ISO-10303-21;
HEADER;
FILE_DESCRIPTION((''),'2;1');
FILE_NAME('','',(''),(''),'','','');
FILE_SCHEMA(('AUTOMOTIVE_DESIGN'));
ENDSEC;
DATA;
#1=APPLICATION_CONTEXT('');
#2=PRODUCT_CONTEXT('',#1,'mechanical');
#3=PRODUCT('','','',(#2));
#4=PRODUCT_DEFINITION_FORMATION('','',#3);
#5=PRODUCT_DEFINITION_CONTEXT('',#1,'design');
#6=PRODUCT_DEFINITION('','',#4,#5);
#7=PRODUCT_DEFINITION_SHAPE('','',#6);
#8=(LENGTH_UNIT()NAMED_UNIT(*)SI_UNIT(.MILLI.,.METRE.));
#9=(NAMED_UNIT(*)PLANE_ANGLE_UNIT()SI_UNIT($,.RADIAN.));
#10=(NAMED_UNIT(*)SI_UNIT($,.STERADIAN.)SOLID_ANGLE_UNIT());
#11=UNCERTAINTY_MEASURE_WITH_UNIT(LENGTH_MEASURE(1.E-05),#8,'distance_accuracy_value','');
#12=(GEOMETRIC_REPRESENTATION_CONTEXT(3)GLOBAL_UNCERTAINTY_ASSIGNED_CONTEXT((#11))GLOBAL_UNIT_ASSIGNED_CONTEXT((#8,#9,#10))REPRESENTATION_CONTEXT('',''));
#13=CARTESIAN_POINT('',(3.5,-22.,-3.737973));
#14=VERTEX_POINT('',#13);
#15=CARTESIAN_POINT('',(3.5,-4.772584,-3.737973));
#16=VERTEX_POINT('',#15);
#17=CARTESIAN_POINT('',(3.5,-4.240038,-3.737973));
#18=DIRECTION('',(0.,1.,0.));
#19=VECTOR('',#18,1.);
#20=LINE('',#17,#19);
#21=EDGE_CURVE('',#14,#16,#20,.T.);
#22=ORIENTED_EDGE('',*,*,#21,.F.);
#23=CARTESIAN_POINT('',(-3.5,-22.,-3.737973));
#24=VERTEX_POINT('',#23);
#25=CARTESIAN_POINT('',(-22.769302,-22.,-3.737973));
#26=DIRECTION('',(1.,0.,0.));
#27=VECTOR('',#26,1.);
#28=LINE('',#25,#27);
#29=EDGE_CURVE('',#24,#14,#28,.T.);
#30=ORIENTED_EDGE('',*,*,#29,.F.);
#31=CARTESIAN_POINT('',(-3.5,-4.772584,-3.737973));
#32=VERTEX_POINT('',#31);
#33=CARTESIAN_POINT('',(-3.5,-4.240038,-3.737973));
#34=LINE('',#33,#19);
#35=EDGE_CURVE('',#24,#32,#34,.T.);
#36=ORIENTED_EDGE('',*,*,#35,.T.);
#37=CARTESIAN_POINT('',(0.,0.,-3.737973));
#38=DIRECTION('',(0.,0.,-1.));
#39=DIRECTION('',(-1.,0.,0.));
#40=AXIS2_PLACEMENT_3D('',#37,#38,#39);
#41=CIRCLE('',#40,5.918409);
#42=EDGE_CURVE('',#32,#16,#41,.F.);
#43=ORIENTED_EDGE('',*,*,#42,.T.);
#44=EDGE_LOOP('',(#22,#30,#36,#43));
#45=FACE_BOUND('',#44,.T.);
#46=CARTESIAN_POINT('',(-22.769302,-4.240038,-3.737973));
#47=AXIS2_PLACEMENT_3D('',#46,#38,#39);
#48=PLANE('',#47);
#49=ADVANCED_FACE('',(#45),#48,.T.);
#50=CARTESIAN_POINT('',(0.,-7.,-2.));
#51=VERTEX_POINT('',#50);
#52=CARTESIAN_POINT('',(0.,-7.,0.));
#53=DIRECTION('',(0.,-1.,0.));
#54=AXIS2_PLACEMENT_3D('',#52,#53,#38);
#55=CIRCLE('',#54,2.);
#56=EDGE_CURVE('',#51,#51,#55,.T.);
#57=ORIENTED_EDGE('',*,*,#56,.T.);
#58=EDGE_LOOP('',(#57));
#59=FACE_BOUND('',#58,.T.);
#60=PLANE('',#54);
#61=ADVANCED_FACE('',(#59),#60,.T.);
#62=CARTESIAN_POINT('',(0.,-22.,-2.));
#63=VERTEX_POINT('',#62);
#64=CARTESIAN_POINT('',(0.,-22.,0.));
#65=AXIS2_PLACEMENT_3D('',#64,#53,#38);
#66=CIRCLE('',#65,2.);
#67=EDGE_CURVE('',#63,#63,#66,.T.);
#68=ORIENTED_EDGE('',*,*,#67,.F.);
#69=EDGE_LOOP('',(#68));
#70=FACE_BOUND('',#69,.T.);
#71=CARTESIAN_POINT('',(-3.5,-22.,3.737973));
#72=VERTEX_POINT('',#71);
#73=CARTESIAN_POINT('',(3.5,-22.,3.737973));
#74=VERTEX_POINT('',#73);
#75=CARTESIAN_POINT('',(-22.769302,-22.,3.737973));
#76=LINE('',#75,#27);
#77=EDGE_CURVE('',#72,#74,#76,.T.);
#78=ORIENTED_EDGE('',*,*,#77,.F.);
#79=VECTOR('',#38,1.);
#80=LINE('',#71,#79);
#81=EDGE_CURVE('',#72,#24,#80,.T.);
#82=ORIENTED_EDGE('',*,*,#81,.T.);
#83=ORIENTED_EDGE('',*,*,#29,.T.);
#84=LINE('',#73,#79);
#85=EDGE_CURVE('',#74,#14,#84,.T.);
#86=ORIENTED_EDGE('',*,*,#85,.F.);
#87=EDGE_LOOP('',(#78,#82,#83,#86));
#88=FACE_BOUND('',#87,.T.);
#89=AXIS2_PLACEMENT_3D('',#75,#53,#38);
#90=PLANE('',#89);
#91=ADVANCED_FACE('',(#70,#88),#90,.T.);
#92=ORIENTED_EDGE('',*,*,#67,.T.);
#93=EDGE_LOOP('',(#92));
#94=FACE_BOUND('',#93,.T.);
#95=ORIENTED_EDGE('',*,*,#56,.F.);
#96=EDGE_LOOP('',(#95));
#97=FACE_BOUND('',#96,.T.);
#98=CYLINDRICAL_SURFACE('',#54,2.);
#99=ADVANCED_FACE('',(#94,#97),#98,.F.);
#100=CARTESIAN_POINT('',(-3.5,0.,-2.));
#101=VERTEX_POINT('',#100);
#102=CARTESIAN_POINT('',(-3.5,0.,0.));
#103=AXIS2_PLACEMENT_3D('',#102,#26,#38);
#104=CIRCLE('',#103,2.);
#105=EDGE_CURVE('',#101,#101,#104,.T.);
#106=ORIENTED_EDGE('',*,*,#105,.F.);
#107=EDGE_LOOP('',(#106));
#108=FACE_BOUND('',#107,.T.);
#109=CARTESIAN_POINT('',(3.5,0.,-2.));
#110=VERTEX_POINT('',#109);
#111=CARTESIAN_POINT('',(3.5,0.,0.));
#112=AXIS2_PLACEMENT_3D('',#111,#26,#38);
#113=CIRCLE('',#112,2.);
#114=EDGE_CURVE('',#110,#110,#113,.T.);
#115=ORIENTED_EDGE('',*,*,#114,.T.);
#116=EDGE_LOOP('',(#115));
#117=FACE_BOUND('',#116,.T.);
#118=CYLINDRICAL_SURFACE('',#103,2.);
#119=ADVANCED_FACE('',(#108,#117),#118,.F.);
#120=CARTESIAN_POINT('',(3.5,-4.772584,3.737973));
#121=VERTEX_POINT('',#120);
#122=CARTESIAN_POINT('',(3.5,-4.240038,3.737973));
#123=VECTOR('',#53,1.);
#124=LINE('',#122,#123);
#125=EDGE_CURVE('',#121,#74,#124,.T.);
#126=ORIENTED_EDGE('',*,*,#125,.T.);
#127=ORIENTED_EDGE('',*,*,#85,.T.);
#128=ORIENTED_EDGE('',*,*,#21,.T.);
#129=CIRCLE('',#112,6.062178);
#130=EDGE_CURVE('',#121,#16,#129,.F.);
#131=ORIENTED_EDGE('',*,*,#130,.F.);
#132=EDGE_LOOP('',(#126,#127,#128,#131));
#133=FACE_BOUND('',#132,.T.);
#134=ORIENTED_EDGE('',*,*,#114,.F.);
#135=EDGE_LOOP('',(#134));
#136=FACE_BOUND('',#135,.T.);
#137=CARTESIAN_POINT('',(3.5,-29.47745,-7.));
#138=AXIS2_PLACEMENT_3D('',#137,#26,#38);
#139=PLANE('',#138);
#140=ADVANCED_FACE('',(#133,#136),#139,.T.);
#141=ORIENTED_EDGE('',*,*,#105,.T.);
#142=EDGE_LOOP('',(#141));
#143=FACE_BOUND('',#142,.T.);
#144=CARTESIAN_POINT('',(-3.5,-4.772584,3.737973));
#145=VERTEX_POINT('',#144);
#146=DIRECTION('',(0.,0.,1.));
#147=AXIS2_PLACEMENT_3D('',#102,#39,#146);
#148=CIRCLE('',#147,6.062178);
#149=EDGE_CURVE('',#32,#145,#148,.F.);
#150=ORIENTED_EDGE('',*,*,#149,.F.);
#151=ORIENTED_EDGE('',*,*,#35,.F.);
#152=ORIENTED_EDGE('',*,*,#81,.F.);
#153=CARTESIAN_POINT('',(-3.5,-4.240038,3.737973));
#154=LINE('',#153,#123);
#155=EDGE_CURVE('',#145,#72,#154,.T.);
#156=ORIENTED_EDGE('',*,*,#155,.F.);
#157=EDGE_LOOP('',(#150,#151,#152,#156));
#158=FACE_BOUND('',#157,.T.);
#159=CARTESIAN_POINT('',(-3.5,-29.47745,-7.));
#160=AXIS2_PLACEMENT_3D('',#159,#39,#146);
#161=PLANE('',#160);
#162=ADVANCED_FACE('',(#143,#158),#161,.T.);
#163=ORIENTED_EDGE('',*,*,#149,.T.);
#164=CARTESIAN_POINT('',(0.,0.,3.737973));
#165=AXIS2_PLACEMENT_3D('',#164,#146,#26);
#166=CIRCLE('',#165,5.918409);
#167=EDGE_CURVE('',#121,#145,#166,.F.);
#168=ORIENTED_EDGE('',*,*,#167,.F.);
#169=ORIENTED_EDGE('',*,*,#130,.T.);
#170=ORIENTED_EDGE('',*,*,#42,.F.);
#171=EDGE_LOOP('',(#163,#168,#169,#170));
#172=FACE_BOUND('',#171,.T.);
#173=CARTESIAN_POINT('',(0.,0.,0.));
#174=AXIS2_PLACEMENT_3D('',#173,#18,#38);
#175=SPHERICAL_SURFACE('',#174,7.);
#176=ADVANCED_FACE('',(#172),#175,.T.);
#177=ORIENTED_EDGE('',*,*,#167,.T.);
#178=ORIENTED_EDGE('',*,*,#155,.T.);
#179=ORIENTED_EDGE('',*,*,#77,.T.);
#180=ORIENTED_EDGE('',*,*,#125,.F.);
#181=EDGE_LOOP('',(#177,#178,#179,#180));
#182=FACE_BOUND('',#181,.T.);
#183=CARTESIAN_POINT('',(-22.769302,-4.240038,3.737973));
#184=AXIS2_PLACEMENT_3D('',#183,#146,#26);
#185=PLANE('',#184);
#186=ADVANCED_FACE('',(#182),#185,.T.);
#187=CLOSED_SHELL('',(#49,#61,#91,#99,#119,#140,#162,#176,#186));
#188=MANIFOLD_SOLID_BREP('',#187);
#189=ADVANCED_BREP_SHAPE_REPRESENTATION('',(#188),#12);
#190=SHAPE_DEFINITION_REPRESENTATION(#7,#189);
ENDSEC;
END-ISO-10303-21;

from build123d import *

# Parameters (mm, degrees)
CUT_EXTRUDE_START        = -6.062177826
CUT_EXTRUDE_1_OUTLINE_W  = 4.5
CUT_EXTRUDE_1_OUTLINE_H  = 16
CUT_EXTRUDE_1_DEPTH      = 12.124355652
CUT_EXTRUDE_2_DEPTH      = 15.43086969
CUT_EXTRUDE_2_DEPTH_BACK = 15.43086969
SKETCH_3_R               = 2
SKETCH_4_W               = 7.475945476
SKETCH_4_H               = 17.759961534
EXTRUDE_1_DEPTH          = 7
SKETCH_5_R               = 2
CUT_EXTRUDE_3_DEPTH      = 15


# Read off the part's stored shape, not the designer's step: 切除-拉伸1
with BuildPart() as part:
    # 草图1 → 旋转1 (revolve)
    with BuildSketch(Plane(origin=(0, 0, 0), x_dir=(0, 0, -1), z_dir=(1, 0, 0))):
        with BuildLine():
            Line((0, 7), (0, -7))
            ThreePointArc((0, -7), (-7, 0), (0, 7))
        make_face()
    revolve(axis=Axis((0, 7, 0), (0, -1, 0)))

    # 切除-拉伸1 outline → 切除-拉伸1 (cut)
    with BuildSketch(Plane.XY.offset(CUT_EXTRUDE_START)):
        with Locations((-5.75, 0)):
            Rectangle(CUT_EXTRUDE_1_OUTLINE_W, CUT_EXTRUDE_1_OUTLINE_H)
        with Locations((5.75, 0)):
            Rectangle(CUT_EXTRUDE_1_OUTLINE_W, CUT_EXTRUDE_1_OUTLINE_H)
    extrude(amount=CUT_EXTRUDE_1_DEPTH, mode=Mode.SUBTRACT)

    # 草图3 → 切除-拉伸2 (cut, two sides: drawn at the far end of the back side and taken through both)
    with BuildSketch(Plane(origin=(3.5, 0, 0), x_dir=(0, 0, -1), z_dir=(1, 0, 0)).offset(-CUT_EXTRUDE_2_DEPTH_BACK)):
        Circle(SKETCH_3_R)
    extrude(amount=CUT_EXTRUDE_2_DEPTH + CUT_EXTRUDE_2_DEPTH_BACK, mode=Mode.SUBTRACT)

    # 草图4 → 凸台-拉伸1 (add)
    with BuildSketch(Plane(origin=(3.5, 0, 0), x_dir=(0, 0, -1), z_dir=(1, 0, 0))):
        with Locations((0, -13.120019233)):
            Rectangle(SKETCH_4_W, SKETCH_4_H)
    extrude(amount=-EXTRUDE_1_DEPTH)

    # 草图5 → 切除-拉伸3 (cut)
    with BuildSketch(Plane.XZ.offset(22)):
        with Locations(Location((0, 0, 0), (0, 0, 270))):
            Circle(SKETCH_5_R)
    extrude(amount=-CUT_EXTRUDE_3_DEPTH, mode=Mode.SUBTRACT)


solid = part.part
